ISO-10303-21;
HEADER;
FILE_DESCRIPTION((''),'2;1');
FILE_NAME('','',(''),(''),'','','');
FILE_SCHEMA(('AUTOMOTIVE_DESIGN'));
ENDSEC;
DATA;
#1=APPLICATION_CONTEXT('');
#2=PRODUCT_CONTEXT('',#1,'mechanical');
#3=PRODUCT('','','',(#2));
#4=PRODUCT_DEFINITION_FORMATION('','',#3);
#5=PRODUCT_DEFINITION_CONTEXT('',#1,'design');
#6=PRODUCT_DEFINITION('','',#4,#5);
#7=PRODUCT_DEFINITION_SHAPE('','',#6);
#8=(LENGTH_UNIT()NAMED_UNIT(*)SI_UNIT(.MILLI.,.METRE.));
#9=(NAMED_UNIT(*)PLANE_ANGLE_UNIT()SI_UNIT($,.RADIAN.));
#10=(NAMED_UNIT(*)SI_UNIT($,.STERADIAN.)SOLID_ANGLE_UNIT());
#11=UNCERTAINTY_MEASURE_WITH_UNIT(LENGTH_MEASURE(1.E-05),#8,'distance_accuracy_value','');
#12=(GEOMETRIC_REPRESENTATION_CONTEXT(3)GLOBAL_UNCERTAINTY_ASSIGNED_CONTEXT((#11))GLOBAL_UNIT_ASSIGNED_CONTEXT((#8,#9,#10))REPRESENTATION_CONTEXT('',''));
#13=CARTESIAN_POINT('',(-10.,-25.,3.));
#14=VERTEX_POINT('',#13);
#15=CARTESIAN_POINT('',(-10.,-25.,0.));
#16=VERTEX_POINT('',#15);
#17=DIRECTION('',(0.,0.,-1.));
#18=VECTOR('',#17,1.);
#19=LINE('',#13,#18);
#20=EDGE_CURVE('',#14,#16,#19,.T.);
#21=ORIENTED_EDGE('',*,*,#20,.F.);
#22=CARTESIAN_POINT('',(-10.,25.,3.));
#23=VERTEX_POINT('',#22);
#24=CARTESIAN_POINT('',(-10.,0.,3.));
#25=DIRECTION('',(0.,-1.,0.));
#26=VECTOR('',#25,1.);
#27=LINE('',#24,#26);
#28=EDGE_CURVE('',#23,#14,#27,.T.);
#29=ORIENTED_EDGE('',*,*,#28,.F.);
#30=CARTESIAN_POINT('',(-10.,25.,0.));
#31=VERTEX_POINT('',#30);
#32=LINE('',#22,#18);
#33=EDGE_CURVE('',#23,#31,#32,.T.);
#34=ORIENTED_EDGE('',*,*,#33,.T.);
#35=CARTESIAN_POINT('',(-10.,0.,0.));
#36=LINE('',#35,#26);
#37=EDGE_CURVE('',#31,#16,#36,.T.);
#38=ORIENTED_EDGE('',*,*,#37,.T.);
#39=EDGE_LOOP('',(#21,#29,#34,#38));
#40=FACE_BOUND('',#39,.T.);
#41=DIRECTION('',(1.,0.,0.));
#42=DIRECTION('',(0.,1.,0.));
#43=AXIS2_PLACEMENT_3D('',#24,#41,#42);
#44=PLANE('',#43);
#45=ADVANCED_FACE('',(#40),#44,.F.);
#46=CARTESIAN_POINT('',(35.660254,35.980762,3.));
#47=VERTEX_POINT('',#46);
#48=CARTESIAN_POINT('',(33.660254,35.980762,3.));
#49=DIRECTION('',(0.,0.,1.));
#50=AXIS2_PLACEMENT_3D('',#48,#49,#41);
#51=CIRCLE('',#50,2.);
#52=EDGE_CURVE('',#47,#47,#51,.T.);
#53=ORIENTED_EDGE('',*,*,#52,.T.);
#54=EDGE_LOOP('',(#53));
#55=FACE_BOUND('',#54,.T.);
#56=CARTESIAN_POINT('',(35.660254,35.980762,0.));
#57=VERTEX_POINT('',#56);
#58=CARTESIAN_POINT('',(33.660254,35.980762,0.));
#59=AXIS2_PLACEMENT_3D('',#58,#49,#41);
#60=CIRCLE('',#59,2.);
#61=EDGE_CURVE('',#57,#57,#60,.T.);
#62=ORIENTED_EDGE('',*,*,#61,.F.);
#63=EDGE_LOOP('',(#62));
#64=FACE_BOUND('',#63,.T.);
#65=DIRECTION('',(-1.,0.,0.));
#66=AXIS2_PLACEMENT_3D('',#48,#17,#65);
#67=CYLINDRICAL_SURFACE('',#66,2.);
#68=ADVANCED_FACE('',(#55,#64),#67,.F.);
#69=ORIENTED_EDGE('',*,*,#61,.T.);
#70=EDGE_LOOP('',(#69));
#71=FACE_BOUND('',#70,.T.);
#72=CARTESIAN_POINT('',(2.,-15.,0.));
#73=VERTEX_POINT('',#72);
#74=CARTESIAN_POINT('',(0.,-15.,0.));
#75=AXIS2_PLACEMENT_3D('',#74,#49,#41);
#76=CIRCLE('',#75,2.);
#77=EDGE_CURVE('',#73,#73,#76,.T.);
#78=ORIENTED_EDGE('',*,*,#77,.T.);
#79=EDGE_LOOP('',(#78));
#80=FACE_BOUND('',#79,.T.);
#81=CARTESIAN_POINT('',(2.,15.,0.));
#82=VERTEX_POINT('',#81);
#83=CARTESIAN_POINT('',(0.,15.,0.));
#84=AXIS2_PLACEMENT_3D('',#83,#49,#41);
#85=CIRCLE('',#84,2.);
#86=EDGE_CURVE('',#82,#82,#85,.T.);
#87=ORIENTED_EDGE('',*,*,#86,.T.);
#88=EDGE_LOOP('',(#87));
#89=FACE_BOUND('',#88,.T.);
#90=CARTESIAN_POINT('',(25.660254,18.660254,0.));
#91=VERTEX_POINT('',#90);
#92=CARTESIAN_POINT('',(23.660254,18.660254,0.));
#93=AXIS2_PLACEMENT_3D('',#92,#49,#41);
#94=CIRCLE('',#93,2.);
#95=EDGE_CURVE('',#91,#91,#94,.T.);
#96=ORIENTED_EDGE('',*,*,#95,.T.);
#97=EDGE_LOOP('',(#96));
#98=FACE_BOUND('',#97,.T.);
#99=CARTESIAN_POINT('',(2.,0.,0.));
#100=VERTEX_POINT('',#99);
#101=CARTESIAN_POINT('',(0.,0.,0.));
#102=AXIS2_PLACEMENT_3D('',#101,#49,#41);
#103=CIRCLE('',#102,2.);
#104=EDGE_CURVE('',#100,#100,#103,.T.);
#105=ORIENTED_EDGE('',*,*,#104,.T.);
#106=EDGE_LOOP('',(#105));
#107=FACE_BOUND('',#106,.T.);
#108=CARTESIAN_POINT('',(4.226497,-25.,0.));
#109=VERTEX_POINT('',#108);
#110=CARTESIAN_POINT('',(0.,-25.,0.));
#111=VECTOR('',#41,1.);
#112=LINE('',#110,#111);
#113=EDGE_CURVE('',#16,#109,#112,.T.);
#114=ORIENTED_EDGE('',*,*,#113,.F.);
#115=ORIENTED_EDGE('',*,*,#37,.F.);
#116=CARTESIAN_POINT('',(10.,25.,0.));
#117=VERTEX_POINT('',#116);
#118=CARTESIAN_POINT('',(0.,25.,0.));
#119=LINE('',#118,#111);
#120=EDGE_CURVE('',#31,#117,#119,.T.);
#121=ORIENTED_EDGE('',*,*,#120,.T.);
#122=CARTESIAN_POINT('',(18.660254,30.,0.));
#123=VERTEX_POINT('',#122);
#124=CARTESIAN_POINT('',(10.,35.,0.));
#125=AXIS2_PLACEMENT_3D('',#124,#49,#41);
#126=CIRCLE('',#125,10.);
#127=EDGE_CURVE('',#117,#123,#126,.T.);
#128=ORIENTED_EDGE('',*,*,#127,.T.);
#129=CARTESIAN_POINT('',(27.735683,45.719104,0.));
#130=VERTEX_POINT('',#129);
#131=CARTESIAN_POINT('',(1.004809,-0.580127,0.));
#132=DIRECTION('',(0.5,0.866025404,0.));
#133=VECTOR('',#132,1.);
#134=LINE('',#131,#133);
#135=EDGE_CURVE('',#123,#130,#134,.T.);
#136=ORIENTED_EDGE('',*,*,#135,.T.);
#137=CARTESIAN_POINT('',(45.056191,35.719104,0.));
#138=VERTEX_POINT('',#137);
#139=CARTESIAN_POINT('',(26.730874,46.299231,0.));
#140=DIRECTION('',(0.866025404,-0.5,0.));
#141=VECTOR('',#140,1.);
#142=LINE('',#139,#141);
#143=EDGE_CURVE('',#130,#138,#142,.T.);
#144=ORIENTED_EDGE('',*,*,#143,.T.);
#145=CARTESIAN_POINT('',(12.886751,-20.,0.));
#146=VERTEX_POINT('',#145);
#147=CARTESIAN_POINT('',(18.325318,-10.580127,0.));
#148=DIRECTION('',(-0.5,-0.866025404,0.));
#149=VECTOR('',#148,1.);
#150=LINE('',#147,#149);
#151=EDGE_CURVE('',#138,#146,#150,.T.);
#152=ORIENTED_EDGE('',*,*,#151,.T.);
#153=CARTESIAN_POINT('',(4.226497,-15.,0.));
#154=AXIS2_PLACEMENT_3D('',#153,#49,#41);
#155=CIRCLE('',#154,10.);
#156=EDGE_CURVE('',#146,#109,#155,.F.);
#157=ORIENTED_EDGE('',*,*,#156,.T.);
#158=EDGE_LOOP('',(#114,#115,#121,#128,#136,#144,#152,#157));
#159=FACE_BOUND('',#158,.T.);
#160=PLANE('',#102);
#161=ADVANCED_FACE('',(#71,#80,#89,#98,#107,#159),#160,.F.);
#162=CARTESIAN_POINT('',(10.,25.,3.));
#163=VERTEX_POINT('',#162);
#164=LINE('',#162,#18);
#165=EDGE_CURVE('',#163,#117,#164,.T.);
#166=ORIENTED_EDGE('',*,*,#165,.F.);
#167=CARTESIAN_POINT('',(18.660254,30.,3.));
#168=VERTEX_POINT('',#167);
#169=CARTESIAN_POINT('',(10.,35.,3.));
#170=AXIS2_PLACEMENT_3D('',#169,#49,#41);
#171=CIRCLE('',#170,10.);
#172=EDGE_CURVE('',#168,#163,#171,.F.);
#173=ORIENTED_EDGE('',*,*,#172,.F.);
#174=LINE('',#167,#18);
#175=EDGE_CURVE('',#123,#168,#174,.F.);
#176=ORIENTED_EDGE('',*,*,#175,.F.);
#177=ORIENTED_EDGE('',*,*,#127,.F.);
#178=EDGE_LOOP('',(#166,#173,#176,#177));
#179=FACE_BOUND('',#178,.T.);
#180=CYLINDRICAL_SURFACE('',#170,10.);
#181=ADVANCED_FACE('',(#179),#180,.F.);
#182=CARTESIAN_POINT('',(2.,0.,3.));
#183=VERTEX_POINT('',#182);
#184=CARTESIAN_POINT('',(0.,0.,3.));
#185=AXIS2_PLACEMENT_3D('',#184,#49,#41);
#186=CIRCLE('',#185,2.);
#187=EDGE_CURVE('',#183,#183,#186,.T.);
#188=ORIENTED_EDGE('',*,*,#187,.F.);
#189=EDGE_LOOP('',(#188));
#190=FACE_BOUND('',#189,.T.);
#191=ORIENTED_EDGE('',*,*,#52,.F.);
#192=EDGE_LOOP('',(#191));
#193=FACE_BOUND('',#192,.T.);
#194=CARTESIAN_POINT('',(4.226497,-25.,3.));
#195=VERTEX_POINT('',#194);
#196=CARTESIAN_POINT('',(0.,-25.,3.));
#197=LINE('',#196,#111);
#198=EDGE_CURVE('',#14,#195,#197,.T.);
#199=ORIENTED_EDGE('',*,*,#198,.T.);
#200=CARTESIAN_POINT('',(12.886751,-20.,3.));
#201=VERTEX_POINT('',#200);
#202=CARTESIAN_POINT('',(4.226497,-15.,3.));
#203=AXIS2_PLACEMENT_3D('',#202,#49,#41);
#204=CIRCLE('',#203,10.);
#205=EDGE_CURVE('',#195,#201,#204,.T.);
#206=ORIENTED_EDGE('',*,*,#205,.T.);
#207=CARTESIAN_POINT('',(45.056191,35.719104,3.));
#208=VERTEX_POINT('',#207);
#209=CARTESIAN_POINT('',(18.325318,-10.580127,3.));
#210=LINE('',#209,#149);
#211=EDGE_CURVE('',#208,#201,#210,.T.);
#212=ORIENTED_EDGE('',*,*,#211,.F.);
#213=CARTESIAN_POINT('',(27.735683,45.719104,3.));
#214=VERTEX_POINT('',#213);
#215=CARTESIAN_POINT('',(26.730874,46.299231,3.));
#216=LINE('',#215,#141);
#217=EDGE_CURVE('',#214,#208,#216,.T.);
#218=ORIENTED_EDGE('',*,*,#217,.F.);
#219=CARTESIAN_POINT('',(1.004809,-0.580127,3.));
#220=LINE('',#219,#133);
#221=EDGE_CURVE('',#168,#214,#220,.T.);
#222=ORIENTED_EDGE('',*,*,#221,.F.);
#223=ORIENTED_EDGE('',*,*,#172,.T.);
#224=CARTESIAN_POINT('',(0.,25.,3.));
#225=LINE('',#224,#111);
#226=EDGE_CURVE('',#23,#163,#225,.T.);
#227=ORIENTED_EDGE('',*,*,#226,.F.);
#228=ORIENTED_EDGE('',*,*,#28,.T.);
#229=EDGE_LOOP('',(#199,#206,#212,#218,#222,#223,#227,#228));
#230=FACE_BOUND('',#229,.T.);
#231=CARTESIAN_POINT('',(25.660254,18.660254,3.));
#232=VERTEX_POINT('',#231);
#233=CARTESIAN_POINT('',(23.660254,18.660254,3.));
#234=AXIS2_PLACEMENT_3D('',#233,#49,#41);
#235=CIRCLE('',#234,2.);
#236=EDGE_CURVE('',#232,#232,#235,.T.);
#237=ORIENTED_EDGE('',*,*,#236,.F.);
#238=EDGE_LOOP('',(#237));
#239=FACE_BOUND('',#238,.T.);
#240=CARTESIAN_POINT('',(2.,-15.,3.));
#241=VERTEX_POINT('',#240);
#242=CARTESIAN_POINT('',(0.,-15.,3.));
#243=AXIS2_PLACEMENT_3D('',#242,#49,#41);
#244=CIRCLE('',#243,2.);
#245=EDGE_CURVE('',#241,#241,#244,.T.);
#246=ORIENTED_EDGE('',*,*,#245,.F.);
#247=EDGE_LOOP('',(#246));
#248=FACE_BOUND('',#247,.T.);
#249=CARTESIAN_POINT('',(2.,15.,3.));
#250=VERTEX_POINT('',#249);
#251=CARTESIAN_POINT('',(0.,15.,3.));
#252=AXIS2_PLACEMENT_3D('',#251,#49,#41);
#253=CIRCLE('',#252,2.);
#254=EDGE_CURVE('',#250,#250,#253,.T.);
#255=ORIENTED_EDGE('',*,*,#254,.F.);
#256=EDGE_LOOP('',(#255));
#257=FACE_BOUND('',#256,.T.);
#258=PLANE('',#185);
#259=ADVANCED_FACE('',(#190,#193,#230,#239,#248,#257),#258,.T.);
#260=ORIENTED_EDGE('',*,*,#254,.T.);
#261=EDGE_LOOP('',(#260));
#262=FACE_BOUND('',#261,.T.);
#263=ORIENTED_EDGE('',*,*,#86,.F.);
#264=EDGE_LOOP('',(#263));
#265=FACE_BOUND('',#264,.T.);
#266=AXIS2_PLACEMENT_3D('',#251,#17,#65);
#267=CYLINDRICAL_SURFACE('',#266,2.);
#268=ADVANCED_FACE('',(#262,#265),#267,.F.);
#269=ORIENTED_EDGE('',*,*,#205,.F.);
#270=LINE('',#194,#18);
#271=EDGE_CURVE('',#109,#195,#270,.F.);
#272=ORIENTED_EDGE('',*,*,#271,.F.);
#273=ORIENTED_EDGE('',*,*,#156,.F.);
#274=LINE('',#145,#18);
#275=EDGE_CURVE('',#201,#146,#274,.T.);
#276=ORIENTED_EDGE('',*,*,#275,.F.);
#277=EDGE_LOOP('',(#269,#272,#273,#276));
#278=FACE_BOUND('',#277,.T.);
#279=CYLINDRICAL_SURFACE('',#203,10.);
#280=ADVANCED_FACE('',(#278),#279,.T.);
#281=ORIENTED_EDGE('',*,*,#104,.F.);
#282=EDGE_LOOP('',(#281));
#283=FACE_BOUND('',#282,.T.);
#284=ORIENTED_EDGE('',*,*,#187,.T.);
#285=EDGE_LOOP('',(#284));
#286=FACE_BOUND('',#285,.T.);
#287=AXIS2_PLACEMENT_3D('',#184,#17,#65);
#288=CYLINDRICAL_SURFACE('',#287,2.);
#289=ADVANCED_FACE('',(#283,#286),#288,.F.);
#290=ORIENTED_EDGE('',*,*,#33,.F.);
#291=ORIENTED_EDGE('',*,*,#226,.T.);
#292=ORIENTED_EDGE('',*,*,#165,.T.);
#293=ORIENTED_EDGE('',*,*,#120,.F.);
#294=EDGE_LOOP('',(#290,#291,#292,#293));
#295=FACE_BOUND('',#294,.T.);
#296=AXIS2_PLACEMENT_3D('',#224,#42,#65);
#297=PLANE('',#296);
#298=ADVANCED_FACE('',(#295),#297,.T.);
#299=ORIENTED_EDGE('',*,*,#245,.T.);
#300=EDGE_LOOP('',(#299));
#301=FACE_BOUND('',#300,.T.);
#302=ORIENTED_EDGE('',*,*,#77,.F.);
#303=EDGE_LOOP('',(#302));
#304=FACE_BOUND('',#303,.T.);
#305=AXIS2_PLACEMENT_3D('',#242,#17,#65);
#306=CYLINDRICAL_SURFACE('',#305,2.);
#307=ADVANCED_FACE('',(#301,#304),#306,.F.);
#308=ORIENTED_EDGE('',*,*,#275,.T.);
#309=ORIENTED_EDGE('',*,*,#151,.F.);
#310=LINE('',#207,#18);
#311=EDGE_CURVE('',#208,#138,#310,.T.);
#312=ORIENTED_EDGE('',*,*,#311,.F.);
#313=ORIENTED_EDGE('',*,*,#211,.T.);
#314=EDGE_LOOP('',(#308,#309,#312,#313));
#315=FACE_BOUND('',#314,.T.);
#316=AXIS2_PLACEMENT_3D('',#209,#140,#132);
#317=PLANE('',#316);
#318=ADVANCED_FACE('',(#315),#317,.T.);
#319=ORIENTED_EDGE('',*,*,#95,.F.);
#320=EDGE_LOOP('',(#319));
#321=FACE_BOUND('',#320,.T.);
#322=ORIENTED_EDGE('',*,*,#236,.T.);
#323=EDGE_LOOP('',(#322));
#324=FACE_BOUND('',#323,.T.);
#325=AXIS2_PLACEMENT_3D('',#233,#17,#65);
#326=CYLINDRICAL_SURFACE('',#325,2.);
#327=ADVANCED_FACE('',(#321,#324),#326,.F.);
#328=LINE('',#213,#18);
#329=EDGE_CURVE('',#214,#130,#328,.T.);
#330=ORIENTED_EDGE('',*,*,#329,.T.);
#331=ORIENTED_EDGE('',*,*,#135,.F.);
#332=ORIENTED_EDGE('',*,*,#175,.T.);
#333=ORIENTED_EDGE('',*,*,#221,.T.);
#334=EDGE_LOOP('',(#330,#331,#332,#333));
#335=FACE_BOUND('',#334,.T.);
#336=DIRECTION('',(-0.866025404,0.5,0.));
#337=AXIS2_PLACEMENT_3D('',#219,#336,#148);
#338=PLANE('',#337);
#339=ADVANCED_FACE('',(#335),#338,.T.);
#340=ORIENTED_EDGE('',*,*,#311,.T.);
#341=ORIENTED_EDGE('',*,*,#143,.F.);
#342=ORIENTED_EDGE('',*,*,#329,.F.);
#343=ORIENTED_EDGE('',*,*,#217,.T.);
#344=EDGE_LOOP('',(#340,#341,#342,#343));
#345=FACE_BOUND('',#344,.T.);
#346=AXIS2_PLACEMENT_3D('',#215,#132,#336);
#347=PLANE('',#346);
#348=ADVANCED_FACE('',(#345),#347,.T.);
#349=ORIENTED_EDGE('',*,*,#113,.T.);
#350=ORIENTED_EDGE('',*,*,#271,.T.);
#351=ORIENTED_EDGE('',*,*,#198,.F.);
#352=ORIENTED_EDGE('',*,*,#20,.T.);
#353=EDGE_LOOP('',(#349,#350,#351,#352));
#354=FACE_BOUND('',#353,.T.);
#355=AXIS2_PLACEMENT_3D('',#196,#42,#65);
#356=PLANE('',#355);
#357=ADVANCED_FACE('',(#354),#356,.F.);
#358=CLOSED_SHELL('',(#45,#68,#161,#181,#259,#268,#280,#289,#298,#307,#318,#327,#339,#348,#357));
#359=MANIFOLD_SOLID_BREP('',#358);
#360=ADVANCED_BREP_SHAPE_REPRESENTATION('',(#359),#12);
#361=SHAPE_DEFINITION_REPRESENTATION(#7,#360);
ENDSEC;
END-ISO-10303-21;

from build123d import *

# Parameters (mm, degrees)
SKETCH_1_R      = 2
SKETCH_1_W      = 20
SKETCH_1_H      = 50
EXTRUDE_1_DEPTH = 3
FILLET_1_R      = 10


with BuildPart() as part:
    # 草图1 → 凸台-拉伸1 (new body)
    # profile 1 of 3: a face of its own
    with BuildSketch(Plane.XY):
        Polygon((27.320508076, 5), (10, 15), (10, -25), align=None)
    # profile 2 of 3: a face of its own
    with BuildSketch(Plane.XY):
        Polygon((27.735682985, 45.719104037), (45.05619106, 35.719104037), (27.320508076, 5), (10, 15), align=None)
        with Locations((33.660254038, 35.980762114)):
            Circle(SKETCH_1_R, mode=Mode.SUBTRACT)
        with Locations((23.660254038, 18.660254038)):
            Circle(SKETCH_1_R, mode=Mode.SUBTRACT)
    # profile 3 of 3: a face of its own
    with BuildSketch(Plane.XY):
        Rectangle(SKETCH_1_W, SKETCH_1_H)
        Circle(SKETCH_1_R, mode=Mode.SUBTRACT)
        with Locations((0, -15)):
            Circle(SKETCH_1_R, mode=Mode.SUBTRACT)
        with Locations((0, 15)):
            Circle(SKETCH_1_R, mode=Mode.SUBTRACT)
    extrude(amount=EXTRUDE_1_DEPTH)

    # 圆角1
    # the kernel refuses this fillet: 10 mm, written as the material it adds along each edge
    with BuildSketch(Plane(origin=(10, 15, 0), x_dir=(0.49999999999999756, 0.86602540378444, 0), z_dir=(0, 0, 1))) as fillet_1_piece_1:
        with BuildLine():
            CenterArc((17.320508076, 10), FILLET_1_R, 210, 60)
            Line((8.660254038, 5), (0, 0))
            Line((0, 0), (17.320508076, 0))
        make_face()
    extrude(amount=3)
    # the kernel refuses this fillet: 10 mm, written as the material it takes off along each edge
    with BuildSketch(Plane(origin=(10, -25, -14.43375673), x_dir=(0.49999999999999745, 0.86602540378444, 0), z_dir=(0, 0, 1))) as fillet_1_2_piece_1:
        with BuildLine():
            CenterArc((FILLET_1_R * 0.57735026919, FILLET_1_R), FILLET_1_R, 210, 60)
            Line((-FILLET_1_R * 0.288675134595, FILLET_1_R * 0.5), (0, 0))
            Line((0, 0), (FILLET_1_R * 0.57735026919, 0))
        make_face()
    extrude(amount=31.867513459, mode=Mode.SUBTRACT)


solid = part.part
